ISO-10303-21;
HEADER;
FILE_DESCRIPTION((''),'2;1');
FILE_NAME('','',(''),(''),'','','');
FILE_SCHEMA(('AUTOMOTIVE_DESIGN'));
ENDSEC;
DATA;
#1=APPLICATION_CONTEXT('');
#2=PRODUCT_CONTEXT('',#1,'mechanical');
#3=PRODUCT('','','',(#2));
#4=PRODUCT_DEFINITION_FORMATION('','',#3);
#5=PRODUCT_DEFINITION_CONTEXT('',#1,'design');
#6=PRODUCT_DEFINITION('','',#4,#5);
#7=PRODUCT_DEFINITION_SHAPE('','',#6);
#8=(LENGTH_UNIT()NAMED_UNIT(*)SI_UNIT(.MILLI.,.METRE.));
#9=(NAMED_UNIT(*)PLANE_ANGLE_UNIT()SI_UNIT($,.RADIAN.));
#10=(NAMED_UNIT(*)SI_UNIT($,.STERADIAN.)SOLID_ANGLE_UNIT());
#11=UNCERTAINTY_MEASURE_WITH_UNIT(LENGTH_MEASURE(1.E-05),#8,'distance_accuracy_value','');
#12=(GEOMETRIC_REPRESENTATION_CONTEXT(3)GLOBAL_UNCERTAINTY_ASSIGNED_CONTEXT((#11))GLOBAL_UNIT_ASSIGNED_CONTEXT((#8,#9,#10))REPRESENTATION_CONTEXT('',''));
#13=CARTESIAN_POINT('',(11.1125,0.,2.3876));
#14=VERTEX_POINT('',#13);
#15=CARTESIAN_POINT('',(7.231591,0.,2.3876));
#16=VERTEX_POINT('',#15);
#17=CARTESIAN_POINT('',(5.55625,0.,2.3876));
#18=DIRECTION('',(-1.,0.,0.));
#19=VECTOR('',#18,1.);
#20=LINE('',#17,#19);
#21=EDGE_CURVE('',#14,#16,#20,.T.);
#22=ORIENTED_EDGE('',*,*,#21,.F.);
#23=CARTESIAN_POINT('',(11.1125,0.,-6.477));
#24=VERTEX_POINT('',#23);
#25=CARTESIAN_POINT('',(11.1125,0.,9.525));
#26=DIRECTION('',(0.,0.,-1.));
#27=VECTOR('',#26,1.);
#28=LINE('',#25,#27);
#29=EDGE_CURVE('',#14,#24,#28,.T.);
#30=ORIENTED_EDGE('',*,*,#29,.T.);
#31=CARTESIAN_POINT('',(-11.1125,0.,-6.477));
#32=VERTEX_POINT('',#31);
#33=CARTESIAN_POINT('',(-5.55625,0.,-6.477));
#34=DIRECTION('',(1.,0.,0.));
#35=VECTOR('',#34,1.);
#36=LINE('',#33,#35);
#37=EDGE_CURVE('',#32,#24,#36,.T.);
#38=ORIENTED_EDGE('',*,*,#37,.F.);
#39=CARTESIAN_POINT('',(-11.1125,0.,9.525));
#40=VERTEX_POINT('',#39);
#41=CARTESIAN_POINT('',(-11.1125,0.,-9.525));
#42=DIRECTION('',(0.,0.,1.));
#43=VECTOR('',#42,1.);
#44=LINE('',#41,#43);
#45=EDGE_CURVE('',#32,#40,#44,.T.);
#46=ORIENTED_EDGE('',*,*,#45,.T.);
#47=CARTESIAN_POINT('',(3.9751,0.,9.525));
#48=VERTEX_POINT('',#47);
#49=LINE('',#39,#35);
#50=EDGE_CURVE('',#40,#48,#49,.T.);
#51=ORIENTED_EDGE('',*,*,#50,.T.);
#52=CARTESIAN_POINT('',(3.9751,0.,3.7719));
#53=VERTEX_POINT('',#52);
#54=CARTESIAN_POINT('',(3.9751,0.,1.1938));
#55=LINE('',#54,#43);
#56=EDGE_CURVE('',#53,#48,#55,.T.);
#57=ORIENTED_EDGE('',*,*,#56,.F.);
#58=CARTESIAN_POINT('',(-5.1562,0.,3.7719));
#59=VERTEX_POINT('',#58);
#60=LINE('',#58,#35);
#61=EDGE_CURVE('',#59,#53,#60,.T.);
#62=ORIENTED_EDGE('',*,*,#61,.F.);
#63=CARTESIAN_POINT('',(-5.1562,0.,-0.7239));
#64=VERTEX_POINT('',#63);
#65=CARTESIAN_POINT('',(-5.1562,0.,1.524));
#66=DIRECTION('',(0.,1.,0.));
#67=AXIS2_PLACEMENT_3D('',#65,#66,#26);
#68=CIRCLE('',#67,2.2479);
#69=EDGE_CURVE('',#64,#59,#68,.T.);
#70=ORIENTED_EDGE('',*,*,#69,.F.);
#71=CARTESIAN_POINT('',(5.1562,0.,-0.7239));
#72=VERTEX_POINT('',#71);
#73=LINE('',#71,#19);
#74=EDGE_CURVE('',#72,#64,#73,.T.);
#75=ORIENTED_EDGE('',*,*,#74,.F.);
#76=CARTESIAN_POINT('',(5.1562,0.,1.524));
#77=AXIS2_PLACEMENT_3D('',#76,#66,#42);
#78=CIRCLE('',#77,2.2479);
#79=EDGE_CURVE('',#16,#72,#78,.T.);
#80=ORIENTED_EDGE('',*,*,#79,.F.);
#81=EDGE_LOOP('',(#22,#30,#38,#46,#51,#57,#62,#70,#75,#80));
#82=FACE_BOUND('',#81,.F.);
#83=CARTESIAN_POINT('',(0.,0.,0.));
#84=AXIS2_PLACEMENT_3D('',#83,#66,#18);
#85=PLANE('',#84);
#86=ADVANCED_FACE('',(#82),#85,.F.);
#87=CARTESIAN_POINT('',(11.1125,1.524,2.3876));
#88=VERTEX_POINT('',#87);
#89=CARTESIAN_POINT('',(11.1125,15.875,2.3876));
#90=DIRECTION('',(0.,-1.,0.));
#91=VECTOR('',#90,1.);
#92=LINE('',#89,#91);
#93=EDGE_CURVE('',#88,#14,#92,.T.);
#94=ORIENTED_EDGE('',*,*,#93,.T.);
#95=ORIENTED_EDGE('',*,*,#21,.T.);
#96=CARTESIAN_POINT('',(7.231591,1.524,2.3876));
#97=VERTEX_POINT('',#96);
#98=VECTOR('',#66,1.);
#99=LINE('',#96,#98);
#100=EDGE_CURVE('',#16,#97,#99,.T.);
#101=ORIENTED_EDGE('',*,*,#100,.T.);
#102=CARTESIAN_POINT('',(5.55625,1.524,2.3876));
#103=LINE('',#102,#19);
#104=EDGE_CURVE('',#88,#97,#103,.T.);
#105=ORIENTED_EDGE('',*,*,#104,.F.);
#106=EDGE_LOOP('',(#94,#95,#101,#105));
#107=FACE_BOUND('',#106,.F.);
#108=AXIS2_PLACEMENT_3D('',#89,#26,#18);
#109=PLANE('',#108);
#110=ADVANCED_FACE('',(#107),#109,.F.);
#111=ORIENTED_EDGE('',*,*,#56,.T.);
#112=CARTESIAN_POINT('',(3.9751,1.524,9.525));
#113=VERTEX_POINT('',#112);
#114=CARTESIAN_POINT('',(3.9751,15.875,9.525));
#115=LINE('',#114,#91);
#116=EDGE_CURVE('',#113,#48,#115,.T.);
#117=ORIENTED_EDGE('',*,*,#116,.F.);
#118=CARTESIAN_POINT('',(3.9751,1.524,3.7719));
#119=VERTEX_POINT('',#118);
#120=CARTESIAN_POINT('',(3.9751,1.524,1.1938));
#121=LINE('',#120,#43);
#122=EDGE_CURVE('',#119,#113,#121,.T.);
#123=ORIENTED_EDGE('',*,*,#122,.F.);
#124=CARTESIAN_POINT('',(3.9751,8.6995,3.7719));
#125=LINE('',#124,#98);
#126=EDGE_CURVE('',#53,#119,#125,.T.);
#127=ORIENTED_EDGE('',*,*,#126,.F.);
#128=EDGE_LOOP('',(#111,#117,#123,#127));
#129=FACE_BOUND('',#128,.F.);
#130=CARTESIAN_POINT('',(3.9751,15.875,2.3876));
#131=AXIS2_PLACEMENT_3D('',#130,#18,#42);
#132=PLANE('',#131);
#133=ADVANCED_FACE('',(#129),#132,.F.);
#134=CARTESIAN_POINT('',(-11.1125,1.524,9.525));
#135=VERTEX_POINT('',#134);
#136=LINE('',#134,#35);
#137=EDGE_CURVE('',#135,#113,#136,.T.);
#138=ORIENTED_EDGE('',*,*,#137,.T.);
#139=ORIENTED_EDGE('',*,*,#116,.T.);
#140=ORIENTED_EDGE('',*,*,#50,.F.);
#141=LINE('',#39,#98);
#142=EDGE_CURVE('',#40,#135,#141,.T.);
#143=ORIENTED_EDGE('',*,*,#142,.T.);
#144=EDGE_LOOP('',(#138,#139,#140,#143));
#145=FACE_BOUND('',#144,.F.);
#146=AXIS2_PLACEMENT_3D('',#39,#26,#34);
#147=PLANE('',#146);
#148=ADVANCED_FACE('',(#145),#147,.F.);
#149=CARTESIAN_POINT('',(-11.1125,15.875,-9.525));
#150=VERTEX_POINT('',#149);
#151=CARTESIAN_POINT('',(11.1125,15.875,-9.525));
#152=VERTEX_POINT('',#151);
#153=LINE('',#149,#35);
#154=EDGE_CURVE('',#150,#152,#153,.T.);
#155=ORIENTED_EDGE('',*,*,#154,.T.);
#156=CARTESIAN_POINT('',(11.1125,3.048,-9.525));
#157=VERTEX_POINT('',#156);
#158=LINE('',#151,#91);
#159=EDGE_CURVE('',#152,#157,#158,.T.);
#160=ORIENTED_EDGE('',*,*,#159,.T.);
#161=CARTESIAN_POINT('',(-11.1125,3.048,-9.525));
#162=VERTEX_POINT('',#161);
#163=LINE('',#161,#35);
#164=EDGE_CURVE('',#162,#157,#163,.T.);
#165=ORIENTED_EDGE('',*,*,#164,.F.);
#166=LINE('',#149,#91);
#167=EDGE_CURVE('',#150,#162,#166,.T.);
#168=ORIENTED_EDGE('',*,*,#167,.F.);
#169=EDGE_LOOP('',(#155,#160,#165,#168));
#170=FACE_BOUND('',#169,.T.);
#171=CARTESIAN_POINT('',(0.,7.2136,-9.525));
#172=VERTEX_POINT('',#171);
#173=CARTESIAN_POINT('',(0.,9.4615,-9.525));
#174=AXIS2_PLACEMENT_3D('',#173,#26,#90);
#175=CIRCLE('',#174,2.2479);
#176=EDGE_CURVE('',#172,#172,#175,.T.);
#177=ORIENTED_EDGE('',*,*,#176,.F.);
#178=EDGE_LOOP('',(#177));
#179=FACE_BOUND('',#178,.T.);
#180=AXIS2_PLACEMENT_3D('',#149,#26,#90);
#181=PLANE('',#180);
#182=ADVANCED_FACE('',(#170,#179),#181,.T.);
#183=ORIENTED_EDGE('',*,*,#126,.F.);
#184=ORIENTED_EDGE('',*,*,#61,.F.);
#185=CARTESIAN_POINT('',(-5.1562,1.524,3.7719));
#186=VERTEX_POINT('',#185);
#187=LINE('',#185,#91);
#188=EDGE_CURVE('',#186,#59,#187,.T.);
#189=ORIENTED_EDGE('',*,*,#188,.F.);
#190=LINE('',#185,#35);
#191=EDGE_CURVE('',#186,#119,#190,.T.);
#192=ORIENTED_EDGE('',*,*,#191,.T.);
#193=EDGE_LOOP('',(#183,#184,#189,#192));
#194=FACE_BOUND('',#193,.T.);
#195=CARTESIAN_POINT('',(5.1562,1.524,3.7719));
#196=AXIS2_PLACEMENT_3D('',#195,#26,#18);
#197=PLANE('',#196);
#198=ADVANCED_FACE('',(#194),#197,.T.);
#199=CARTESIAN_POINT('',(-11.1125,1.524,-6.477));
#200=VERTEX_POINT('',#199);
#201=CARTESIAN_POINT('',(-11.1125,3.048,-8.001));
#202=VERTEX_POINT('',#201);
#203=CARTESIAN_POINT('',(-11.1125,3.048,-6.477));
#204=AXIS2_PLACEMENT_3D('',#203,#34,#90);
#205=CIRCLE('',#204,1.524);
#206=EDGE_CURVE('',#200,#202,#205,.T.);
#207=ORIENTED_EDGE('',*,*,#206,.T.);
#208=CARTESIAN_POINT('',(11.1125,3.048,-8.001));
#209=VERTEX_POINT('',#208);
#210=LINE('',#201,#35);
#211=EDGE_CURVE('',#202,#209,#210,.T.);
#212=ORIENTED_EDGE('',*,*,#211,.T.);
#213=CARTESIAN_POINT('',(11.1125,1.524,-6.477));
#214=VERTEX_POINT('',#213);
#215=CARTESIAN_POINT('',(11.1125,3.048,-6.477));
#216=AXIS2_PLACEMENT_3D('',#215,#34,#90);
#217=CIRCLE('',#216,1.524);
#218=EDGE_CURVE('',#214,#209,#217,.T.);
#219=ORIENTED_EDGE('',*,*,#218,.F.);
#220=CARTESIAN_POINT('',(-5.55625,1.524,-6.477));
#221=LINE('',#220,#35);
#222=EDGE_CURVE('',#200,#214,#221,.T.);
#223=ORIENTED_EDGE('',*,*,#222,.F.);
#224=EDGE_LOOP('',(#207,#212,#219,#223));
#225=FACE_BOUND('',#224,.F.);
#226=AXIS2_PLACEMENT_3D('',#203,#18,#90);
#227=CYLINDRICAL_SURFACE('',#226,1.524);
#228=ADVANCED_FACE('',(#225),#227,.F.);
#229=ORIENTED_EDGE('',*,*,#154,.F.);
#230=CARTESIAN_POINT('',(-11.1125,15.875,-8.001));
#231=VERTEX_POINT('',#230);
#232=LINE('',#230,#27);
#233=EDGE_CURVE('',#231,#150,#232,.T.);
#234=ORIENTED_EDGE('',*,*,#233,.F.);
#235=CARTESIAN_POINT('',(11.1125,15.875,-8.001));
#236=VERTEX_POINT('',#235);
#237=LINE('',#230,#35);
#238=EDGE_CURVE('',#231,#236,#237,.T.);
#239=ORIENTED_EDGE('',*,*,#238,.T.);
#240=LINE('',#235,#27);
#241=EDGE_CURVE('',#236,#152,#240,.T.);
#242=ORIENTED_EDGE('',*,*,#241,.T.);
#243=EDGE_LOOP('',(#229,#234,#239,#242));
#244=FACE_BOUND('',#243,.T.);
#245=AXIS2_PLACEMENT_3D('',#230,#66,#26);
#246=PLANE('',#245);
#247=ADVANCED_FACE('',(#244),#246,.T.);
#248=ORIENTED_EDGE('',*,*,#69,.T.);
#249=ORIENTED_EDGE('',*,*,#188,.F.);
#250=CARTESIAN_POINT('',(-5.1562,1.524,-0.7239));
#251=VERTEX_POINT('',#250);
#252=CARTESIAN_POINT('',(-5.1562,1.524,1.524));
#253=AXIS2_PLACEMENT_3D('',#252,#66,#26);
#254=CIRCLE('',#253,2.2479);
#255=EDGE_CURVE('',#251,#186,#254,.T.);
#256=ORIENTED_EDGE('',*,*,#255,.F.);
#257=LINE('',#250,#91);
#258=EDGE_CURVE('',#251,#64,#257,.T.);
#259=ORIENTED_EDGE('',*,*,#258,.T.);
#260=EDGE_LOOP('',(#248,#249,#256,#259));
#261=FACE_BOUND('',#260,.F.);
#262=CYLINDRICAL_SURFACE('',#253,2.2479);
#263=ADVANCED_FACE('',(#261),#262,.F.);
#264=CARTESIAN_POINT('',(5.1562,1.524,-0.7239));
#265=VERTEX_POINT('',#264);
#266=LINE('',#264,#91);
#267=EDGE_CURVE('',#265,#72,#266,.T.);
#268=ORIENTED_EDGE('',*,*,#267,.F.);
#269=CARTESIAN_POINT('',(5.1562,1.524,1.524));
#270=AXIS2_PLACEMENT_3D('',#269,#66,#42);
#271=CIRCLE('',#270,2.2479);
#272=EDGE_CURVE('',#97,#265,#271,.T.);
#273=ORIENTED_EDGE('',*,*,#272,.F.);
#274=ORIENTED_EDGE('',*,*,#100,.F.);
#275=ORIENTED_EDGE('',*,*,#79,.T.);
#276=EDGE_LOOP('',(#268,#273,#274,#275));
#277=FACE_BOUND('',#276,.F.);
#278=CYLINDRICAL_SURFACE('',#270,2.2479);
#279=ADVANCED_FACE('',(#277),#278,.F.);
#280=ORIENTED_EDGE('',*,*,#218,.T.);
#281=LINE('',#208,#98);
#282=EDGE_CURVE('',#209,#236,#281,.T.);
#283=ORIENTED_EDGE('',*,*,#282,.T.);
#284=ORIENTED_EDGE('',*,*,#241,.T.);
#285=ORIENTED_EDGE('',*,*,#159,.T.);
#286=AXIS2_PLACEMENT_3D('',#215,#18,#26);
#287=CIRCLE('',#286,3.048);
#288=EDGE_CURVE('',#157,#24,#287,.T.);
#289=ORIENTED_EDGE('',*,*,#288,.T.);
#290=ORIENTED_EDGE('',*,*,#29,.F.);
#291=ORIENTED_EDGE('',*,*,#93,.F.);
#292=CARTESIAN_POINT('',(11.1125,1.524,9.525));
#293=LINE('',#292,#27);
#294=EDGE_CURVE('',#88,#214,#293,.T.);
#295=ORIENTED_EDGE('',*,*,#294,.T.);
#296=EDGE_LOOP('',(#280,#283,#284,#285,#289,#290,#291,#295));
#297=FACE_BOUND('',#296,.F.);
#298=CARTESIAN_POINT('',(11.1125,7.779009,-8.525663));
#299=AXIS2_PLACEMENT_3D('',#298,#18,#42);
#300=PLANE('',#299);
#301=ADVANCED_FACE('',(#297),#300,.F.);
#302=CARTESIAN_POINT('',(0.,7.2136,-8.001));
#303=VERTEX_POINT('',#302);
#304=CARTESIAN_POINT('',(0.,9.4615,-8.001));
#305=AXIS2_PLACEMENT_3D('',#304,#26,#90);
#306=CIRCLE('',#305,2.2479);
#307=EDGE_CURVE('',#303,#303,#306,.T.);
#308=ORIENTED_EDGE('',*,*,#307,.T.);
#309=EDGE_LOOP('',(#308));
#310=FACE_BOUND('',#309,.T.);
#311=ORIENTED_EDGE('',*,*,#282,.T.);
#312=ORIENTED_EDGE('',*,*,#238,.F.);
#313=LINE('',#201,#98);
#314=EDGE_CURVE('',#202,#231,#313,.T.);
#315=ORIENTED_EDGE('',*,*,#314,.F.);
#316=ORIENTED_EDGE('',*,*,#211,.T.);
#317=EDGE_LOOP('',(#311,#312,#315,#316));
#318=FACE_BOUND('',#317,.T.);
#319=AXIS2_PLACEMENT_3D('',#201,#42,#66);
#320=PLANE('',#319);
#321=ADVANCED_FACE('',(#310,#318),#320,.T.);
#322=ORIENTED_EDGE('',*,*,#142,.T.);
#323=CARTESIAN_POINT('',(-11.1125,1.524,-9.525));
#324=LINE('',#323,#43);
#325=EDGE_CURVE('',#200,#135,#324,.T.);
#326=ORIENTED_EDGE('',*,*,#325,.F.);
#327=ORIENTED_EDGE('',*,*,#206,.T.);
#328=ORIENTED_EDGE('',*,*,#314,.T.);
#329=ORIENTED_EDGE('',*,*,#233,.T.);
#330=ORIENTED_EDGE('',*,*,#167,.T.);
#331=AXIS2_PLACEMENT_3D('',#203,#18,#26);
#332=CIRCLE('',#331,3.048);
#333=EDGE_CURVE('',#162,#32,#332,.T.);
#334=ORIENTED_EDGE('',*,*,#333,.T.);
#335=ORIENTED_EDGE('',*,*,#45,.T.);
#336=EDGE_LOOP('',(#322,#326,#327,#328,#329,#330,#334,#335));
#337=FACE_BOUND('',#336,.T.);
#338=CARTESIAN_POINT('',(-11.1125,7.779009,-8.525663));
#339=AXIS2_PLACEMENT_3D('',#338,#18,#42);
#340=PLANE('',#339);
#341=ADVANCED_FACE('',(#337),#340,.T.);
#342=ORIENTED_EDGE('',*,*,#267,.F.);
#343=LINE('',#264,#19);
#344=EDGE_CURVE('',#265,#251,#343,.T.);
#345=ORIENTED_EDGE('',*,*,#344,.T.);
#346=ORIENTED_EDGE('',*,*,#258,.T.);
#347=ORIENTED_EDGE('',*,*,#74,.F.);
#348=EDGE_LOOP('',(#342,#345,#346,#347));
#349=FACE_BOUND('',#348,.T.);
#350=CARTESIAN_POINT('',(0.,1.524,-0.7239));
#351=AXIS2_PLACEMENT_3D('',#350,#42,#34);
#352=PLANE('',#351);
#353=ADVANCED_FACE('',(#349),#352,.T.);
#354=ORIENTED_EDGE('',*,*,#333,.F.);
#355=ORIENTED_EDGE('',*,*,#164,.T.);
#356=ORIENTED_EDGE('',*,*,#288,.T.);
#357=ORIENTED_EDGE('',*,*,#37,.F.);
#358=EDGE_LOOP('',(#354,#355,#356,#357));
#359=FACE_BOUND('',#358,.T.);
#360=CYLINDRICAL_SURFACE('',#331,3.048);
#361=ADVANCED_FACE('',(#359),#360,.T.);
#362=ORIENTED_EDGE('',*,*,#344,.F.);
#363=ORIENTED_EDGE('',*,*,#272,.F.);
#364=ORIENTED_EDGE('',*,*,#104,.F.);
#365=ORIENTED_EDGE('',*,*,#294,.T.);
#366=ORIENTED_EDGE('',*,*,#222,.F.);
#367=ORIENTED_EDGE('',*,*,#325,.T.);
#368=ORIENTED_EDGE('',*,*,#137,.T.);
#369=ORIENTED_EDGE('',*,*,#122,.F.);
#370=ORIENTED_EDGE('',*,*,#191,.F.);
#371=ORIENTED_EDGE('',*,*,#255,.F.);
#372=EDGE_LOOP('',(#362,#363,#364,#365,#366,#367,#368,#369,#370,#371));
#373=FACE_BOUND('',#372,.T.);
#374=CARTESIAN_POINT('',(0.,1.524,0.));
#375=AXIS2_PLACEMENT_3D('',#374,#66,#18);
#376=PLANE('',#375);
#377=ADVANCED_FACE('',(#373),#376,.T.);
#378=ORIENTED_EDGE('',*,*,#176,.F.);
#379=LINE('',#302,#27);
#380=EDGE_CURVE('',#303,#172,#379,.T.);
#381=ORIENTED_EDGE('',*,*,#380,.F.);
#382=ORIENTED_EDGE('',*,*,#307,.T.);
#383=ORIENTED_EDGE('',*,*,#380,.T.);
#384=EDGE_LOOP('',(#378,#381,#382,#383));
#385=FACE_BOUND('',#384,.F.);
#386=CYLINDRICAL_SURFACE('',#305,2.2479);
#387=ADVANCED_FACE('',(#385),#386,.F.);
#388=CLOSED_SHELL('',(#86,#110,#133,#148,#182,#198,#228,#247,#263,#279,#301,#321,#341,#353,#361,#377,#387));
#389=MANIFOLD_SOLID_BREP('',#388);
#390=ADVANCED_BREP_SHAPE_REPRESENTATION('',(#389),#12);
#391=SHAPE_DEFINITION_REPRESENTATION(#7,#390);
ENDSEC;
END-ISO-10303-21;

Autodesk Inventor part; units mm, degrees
ref_plane "YZ Plane" through (0, 0, 0) normal (1, 0, 0) x (0, 1, 0)
ref_plane "XZ Plane" through (0, 0, 0) normal (0, 1, 0) x (-1, 0, 0)
ref_plane "XY Plane" through (0, 0, 0) normal (0, 0, 1) x (1, 0, 0)
sketch "Sketch1" plane through (0, 0, 0) normal (0, 1, 0) x (-1, 0, 0)
  line L0 (11.1125, 9.525) -> (-11.1125, 9.525)
  line L1 (-11.1125, 9.525) -> (-11.1125, -9.525)
  line L2 (-11.1125, -9.525) -> (11.1125, -9.525)
  line L3 (11.1125, -9.525) -> (11.1125, 9.525)
  line L4 (11.1125, 9.525) -> (-11.1125, -9.525) construction
  line L5 (-11.1125, 9.525) -> (11.1125, -9.525) construction
  point P0 (0, 0)
  dimension "d0" = 22.225
  dimension "d1" = 19.05
extrude "Plate1" add sketch "Sketch1" along normal blind 1.524
sketch "Sketch2" plane through (-11.1125, 0, -8.001) normal (0, 0, -1) x (-1, 0, 0)
  line L0 (-22.225, 0) -> (0, 0)
  line L1 (0, 0) -> (0, 15.875)
  line L2 (0, 15.875) -> (-22.225, 15.875)
  line L3 (-22.225, 15.875) -> (-22.225, 0)
edge flange "Flange1" height 15.875 angle 90 thickness 1.524 bend radius 1.524 thickness toward (0, 0, -1) relief tear relief width 1.524 relief depth 0.762 edges at (0, 1.524, -9.525) wall of the first edge with corners at (11.1125, 0, -8.001) (-11.1125, 0, -8.001) (-11.1125, 15.875, -8.001) (11.1125, 15.875, -8.001)
bend "Bend1"
corner "Corner1"
sketch "Sketch3" plane through (0, 1.524, 0) normal (0, 1, 0) x (1, 0, 0)
  line L0 (11.1125, 6.477) -> (-11.1125, 6.477) projected
  line L1 (-11.1125, -9.525) -> (-11.1125, 6.477) projected
  line L2 (11.1125, -9.525) -> (-11.1125, -9.525) projected
  line L3 (11.1125, 6.477) -> (11.1125, -9.525) projected
  line L4 (-11.1125, -1.524) -> (11.1125, -1.524) construction
  line L5 (0, 6.477) -> (0, -9.525) construction
  circle A0 centre (0, -1.524) radius 2.2479
  line L6 (-5.1562, -1.524) -> (5.1562, -1.524) construction
  line L7 (-5.1562, 0.7239) -> (5.1562, 0.7239)
  line L8 (5.1562, -3.7719) -> (-5.1562, -3.7719)
  arc A1 (-5.1562, 0.7239) -> (-5.1562, -3.7719) centre (-5.1562, -1.524) ccw
  arc A2 (5.1562, -3.7719) -> (5.1562, 0.7239) centre (5.1562, -1.524) ccw
  point P0 (0, 0)
  dimension "d13" = 16.002
  dimension "d14" = 22.225
  dimension "d24" = 4.4958
  dimension "d25" = 3.7084
sketch "Sketch4" plane through (-11.1125, 15.875, -8.001) normal (0, 0, 1) x (1, 0, 0)
  line L0 (0, -12.827) -> (22.225, -12.827) projected
  line L1 (22.225, 0) -> (22.225, -12.827) projected
  line L2 (22.225, 0) -> (0, 0) projected
  line L3 (0, 0) -> (0, -12.827) projected
  line L4 (0, -6.4135) -> (22.225, -6.4135) construction
  line L5 (22.225, 0) -> (22.225, -12.827) construction
  line L6 (11.1125, -12.827) -> (11.1125, 0) construction
  line L7 (22.225, 0) -> (0, 0) construction
  point P0 (11.1125, -15.875)
  point P1 (11.1125, -6.4135)
  dimension "d15" = 22.225
  dimension "d16" = 12.827
hole "Hole1" at (0, 9.4615, -8.001) direction (0, 0, -1) diameter 4.4958 depth 1.524 tip angle 118 clearance for "Flat Head Machine Screw (82)" size "#8" standard "Ansi Unified Screw Threads"
extrude "Cut1" cut sketch "Sketch3" against normal blind 1.524 contours A0 | A0 L7 A2 L8 | A0 L8 A1 L7
sketch "Sketch7" plane through (11.1125, 15.875, -9.525) normal (0, 0, -1) x (-1, 0, 0)
  line L0 (0, 0) -> (22.225, 0) projected
  line L1 (22.225, -15.875) -> (0, -15.875) projected
  line L2 (0, -12.827) -> (22.225, -12.827) projected
  point P0 (11.1125, -15.875)
  dimension "d28" = 15.875
  dimension "d29" = 12.827
  dimension "d30" = 22.225
sketch "Sketch8" plane through (0, 0, 0) normal (0, -1, 0) x (1, 0, 0)
  arc A0 (-5.1562, 3.7719) -> (-5.1562, -0.7239) centre (-5.1562, 1.524) ccw projected
  line L0 (-5.1562, 3.7719) -> (5.1562, 3.7719) projected
  arc A1 (5.1562, -0.7239) -> (5.1562, 3.7719) centre (5.1562, 1.524) ccw projected
  line L1 (5.1562, -0.7239) -> (-5.1562, -0.7239) projected
  line L2 (-11.1125, -6.477) -> (11.1125, -6.477) projected
  line L3 (11.1125, 9.525) -> (11.1125, -6.477) projected
  line L4 (-11.1125, 9.525) -> (11.1125, 9.525) projected
  line L5 (-11.1125, -6.477) -> (-11.1125, 9.525) projected
  line L6 (11.1125, -9.525) -> (-11.1125, -9.525) projected
  line L7 (11.1125, -6.477) -> (11.1125, -9.525) projected
  line L8 (-11.1125, -6.477) -> (11.1125, -6.477) projected
  line L9 (-11.1125, -9.525) -> (-11.1125, -6.477) projected
  point P0 (0, 0)
  dimension "d31" = 19.05
  dimension "d32" = 16.002
sketch "Sketch9" plane through (0, 1.524, 0) normal (0, 1, 0) x (1, 0, 0)
  arc A0 (5.1562, -3.7719) -> (5.1562, 0.7239) centre (5.1562, -1.524) ccw projected
  arc A1 (-5.1562, 0.7239) -> (-5.1562, -3.7719) centre (-5.1562, -1.524) ccw projected
  line L0 (5.1562, -3.7719) -> (-5.1562, -3.7719) projected
  line L1 (-5.1562, 0.7239) -> (5.1562, 0.7239) projected
  circle A2 centre (0, -1.524) radius 2.2479
  point P0 (0, 0)
  dimension "d34" = 5.1562
sketch "Sketch10" plane through (-11.1125, 15.875, -9.525) normal (0, 1, 0) x (1, 0, 0)
  line L0 (22.225, -19.05) -> (0, -19.05) projected
  line L1 (22.225, 0) -> (0, 0) projected
  line L2 (0, -1.524) -> (0, 0) projected
  line L3 (0, -1.524) -> (0, -3.048) projected
  line L4 (0, -19.05) -> (0, -3.048) projected
  line L5 (0, 0) -> (7.1374, 0)
  line L6 (7.1374, 0) -> (7.1374, -19.05)
  line L7 (7.1374, -19.05) -> (0, -19.05)
  line L8 (0, -19.05) -> (0, 0)
  line L9 (22.225, 0) -> (15.0876, 0)
  line L10 (15.0876, 0) -> (15.0876, -19.05)
  line L11 (15.0876, -19.05) -> (22.225, -19.05)
  line L12 (22.225, -19.05) -> (22.225, 0)
  line L13 (22.225, -3.048) -> (22.225, -19.05) projected
  line L14 (0, -19.05) -> (22.225, -19.05)
  line L15 (22.225, -19.05) -> (22.225, -11.9126)
  line L16 (22.225, -11.9126) -> (0, -11.9126)
  line L17 (0, -11.9126) -> (0, -19.05)
  line L18 (0, -19.05) -> (7.1374, -19.05)
  line L19 (7.1374, -19.05) -> (7.1374, -11.9126)
  line L20 (7.1374, -11.9126) -> (0, -11.9126)
  line L21 (0, -11.9126) -> (0, -19.05)
  line L22 (22.225, -19.05) -> (15.0876, -19.05)
  line L23 (15.0876, -19.05) -> (15.0876, -11.9126)
  line L24 (15.0876, -11.9126) -> (22.225, -11.9126)
  line L25 (22.225, -11.9126) -> (22.225, -19.05)
  point P0 (11.1125, -9.525)
  dimension "d35" = 7.1374
  dimension "d36" = 7.1374
  dimension "d37" = 7.1374
extrude "Cut2" cut sketch "Sketch10" against normal through all contours L0 L10 L16 L12
equation "\"d22\" = Thickness"
equation "\"d26\" = Thickness"
equation "\"d36\" = d35"
equation "\"d38\" = Thickness"
equation "\"d3\" = BendReliefWidth"
equation "\"d4\" = BendReliefDepth"
equation "\"d5\" = MinimumRemnant"
equation "\"d6\" = BendRadius"
equation "\"d9\" = BendRadius"
equation "\"d10\" = CornerReliefSize"
equation "\"d11\" = GapSize"
equation "\"d12\" = JacobiRadiusSize"
equation "\"BendRadius\" = Thickness"
equation "\"BendReliefWidth\" = Thickness"
equation "\"BendReliefDepth\" = 0.5 * Thickness"
equation "\"CornerReliefSize\" = 4 * Thickness"
equation "\"MinimumRemnant\" = 2 * Thickness"
equation "\"TransitionRadius\" = BendRadius"
equation "\"JacobiRadiusSize\" = BendRadius"
equation "\"GapSize\" = Thickness"
equation "\"d2\" = BendRadius"
equation "\"Thickness\" = 1.524"
properties part number "Bracket (15275A53)_RightCut" material "Steel"
